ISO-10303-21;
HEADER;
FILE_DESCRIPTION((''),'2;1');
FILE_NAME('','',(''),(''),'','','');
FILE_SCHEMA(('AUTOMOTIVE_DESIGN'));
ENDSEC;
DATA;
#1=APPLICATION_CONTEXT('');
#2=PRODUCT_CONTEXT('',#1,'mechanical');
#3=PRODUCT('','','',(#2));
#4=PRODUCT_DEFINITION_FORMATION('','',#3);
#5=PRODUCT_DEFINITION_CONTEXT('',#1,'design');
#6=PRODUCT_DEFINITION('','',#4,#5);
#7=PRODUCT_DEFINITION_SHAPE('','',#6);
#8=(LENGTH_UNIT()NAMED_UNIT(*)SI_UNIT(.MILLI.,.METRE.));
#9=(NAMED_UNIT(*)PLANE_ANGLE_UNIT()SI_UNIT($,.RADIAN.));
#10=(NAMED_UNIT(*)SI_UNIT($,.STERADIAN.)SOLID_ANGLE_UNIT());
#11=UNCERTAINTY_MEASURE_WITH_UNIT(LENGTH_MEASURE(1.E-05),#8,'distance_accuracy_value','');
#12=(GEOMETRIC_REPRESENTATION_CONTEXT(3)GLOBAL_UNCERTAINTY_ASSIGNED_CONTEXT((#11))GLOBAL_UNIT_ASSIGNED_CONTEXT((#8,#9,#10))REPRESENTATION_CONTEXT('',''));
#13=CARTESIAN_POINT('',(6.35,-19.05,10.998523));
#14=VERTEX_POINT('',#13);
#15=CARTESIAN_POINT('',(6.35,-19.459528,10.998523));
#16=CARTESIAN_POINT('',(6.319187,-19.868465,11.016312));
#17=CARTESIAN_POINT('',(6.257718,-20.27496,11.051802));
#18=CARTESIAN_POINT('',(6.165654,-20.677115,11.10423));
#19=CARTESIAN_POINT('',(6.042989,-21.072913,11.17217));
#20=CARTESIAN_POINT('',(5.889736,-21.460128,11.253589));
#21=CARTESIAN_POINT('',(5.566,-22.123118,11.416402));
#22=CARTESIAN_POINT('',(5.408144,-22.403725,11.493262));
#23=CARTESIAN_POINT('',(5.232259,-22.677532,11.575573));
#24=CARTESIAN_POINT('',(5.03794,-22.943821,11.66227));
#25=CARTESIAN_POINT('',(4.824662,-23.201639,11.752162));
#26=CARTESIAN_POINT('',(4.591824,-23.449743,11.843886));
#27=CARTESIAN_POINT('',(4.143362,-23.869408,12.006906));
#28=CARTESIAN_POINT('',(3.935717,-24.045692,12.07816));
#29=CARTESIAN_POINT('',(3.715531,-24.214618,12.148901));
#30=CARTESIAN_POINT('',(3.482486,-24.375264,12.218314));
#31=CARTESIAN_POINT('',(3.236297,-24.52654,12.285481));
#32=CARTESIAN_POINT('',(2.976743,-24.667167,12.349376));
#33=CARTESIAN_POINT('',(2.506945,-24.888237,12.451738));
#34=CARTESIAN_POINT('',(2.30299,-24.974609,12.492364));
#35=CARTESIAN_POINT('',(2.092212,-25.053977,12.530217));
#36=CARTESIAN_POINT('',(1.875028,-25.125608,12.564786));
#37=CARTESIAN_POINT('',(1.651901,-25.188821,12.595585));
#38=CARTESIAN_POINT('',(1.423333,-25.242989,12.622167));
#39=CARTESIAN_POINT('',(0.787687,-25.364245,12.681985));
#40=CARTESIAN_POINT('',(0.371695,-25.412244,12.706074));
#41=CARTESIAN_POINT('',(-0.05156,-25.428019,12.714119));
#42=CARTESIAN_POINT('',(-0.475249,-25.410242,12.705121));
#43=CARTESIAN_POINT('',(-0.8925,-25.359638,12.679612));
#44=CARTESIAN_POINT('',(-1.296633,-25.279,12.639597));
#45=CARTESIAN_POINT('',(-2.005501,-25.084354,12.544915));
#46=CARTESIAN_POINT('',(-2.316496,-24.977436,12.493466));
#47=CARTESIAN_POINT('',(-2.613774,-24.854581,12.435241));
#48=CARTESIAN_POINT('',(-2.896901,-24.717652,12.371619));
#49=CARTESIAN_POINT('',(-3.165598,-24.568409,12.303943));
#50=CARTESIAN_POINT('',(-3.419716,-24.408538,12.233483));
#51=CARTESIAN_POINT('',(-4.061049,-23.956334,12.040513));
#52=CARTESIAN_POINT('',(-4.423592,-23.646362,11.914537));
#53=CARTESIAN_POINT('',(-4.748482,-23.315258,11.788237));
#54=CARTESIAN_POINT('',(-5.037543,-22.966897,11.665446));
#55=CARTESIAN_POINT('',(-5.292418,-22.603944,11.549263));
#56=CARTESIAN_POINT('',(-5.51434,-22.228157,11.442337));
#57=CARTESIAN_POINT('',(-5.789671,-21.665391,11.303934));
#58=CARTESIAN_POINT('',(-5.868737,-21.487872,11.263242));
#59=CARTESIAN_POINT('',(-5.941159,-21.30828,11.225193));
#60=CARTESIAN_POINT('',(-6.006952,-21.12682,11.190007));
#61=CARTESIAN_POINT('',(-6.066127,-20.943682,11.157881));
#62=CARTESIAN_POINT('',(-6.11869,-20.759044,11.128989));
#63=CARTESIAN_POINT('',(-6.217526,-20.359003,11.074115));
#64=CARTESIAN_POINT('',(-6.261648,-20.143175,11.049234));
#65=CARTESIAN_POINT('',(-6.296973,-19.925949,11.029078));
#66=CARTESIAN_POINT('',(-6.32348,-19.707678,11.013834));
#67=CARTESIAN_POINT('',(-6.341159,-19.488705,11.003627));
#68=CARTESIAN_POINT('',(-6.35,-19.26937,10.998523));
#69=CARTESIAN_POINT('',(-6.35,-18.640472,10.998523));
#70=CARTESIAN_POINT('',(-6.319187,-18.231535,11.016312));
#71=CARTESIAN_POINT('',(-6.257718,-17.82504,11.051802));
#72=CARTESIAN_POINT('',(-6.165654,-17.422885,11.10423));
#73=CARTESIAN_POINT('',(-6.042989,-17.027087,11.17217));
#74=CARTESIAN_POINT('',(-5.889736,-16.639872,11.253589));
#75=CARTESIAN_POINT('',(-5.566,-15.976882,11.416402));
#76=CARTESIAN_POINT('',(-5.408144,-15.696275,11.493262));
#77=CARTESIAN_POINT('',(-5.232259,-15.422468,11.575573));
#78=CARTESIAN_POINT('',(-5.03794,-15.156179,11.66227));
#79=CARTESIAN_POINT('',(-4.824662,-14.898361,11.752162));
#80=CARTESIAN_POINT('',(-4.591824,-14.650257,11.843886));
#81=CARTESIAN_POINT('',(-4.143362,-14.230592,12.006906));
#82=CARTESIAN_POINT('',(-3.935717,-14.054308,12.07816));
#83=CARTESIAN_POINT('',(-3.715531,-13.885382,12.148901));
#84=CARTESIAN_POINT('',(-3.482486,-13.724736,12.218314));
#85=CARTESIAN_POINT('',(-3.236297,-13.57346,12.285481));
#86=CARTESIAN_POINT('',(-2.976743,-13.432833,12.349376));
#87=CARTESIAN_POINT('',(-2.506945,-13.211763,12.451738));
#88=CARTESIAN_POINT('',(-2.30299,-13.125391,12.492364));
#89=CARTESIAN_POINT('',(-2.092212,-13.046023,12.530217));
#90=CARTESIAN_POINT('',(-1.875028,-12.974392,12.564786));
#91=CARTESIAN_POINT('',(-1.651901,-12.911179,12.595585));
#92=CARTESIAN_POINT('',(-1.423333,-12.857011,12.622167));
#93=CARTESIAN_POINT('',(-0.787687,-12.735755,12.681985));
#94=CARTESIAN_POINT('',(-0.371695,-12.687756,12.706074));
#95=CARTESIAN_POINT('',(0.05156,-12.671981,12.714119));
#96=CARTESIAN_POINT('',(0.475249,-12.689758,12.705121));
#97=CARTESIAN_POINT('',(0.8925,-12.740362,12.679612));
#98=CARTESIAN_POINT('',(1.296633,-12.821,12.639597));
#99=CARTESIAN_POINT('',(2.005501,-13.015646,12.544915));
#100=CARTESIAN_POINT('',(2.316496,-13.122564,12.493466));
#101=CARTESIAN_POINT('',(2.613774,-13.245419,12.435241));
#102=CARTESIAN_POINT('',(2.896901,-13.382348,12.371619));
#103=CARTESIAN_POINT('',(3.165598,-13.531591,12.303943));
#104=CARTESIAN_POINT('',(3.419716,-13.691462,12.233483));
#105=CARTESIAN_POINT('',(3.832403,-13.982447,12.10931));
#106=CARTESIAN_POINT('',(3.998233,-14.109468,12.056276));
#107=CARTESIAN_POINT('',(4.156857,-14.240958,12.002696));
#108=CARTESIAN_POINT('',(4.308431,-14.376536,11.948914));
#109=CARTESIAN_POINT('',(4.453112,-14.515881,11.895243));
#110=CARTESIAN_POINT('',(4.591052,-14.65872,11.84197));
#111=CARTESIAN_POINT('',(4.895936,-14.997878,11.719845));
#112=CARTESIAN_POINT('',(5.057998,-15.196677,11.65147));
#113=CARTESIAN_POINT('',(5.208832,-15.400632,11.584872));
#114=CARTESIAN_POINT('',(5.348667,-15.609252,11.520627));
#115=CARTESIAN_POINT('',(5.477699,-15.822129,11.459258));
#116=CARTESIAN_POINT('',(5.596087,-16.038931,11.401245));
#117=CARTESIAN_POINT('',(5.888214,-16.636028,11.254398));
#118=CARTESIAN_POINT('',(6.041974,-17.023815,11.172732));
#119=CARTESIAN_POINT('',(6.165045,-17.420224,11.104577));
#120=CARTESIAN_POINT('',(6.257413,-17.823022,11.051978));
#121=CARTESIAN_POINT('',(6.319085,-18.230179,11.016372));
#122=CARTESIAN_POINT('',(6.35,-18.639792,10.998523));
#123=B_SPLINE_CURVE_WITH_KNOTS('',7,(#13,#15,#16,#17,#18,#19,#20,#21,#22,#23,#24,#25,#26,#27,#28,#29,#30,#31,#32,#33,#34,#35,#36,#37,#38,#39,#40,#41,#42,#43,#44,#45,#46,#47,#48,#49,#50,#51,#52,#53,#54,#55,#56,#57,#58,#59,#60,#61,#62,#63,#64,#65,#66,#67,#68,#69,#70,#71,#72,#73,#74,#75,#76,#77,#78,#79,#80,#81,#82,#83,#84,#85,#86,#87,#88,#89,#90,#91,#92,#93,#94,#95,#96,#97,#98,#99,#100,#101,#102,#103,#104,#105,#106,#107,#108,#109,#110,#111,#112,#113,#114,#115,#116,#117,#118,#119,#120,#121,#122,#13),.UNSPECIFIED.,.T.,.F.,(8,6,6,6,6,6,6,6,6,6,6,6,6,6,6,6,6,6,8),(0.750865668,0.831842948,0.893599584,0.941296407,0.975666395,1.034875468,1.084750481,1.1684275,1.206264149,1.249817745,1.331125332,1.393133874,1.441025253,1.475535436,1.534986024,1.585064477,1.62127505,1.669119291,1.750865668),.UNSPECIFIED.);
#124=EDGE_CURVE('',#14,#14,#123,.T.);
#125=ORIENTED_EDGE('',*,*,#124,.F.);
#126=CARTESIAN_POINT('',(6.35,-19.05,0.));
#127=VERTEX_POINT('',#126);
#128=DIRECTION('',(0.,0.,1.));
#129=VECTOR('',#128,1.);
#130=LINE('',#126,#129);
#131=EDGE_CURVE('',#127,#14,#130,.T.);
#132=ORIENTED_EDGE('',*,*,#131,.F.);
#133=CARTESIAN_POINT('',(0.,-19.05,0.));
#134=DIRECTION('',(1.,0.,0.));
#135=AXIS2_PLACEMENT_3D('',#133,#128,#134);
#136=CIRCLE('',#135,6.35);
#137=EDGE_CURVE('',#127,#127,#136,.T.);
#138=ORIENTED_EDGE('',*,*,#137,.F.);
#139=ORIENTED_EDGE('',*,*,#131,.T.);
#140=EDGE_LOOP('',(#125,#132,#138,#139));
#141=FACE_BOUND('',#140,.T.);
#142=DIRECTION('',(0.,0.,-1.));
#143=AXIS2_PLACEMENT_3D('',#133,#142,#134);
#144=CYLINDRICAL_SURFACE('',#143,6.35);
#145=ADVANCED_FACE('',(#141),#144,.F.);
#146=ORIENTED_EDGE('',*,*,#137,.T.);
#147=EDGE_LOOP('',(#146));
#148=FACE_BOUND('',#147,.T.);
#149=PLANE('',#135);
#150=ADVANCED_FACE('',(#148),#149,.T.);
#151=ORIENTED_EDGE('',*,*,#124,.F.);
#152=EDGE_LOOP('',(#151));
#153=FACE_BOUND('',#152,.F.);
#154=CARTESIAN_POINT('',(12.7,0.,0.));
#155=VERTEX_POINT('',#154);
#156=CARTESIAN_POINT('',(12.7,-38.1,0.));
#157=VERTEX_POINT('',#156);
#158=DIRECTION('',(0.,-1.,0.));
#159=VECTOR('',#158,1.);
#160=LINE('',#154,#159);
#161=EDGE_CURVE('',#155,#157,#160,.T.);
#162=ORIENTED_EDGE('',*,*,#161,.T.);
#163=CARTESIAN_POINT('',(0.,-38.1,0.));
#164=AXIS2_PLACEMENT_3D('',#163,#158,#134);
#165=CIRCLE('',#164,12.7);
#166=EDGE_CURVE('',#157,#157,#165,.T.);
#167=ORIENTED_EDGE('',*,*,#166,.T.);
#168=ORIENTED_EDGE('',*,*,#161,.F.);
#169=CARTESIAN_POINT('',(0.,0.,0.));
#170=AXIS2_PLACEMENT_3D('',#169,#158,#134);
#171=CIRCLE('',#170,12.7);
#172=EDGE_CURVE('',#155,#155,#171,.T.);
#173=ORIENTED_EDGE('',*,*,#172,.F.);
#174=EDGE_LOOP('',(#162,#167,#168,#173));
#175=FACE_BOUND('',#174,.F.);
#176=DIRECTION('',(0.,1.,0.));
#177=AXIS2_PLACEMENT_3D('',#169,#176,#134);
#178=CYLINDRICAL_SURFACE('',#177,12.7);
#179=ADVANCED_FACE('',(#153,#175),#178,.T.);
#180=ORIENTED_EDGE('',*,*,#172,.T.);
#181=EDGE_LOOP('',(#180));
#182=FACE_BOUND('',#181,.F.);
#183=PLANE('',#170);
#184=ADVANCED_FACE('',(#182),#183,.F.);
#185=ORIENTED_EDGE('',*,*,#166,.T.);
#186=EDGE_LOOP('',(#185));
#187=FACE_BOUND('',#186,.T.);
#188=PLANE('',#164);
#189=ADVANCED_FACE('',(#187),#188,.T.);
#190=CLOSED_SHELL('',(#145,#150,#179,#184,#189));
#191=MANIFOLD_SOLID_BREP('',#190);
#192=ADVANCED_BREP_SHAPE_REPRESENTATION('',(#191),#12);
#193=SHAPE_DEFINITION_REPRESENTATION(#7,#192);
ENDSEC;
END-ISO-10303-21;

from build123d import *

# Parameters (mm, degrees)
F0_R     = 12.7
F1_DEPTH = 38.1
F2_R     = 6.35
F3_DEPTH = 12.7


# Not quite as in the source:
# - a feature names something its author has since deleted; it is built from what else it names


with BuildPart() as f1:
    # F0 (on Front) → F1 (new body)
    with BuildSketch(Plane.XZ):
        Circle(F0_R)
    extrude(amount=F1_DEPTH)

    # F2 (on Top) → F3 (cut)
    with BuildSketch(Plane.XY):
        with Locations((0, -19.05)):
            Circle(F2_R)
    extrude(amount=F3_DEPTH, mode=Mode.SUBTRACT)


solid = f1.part
